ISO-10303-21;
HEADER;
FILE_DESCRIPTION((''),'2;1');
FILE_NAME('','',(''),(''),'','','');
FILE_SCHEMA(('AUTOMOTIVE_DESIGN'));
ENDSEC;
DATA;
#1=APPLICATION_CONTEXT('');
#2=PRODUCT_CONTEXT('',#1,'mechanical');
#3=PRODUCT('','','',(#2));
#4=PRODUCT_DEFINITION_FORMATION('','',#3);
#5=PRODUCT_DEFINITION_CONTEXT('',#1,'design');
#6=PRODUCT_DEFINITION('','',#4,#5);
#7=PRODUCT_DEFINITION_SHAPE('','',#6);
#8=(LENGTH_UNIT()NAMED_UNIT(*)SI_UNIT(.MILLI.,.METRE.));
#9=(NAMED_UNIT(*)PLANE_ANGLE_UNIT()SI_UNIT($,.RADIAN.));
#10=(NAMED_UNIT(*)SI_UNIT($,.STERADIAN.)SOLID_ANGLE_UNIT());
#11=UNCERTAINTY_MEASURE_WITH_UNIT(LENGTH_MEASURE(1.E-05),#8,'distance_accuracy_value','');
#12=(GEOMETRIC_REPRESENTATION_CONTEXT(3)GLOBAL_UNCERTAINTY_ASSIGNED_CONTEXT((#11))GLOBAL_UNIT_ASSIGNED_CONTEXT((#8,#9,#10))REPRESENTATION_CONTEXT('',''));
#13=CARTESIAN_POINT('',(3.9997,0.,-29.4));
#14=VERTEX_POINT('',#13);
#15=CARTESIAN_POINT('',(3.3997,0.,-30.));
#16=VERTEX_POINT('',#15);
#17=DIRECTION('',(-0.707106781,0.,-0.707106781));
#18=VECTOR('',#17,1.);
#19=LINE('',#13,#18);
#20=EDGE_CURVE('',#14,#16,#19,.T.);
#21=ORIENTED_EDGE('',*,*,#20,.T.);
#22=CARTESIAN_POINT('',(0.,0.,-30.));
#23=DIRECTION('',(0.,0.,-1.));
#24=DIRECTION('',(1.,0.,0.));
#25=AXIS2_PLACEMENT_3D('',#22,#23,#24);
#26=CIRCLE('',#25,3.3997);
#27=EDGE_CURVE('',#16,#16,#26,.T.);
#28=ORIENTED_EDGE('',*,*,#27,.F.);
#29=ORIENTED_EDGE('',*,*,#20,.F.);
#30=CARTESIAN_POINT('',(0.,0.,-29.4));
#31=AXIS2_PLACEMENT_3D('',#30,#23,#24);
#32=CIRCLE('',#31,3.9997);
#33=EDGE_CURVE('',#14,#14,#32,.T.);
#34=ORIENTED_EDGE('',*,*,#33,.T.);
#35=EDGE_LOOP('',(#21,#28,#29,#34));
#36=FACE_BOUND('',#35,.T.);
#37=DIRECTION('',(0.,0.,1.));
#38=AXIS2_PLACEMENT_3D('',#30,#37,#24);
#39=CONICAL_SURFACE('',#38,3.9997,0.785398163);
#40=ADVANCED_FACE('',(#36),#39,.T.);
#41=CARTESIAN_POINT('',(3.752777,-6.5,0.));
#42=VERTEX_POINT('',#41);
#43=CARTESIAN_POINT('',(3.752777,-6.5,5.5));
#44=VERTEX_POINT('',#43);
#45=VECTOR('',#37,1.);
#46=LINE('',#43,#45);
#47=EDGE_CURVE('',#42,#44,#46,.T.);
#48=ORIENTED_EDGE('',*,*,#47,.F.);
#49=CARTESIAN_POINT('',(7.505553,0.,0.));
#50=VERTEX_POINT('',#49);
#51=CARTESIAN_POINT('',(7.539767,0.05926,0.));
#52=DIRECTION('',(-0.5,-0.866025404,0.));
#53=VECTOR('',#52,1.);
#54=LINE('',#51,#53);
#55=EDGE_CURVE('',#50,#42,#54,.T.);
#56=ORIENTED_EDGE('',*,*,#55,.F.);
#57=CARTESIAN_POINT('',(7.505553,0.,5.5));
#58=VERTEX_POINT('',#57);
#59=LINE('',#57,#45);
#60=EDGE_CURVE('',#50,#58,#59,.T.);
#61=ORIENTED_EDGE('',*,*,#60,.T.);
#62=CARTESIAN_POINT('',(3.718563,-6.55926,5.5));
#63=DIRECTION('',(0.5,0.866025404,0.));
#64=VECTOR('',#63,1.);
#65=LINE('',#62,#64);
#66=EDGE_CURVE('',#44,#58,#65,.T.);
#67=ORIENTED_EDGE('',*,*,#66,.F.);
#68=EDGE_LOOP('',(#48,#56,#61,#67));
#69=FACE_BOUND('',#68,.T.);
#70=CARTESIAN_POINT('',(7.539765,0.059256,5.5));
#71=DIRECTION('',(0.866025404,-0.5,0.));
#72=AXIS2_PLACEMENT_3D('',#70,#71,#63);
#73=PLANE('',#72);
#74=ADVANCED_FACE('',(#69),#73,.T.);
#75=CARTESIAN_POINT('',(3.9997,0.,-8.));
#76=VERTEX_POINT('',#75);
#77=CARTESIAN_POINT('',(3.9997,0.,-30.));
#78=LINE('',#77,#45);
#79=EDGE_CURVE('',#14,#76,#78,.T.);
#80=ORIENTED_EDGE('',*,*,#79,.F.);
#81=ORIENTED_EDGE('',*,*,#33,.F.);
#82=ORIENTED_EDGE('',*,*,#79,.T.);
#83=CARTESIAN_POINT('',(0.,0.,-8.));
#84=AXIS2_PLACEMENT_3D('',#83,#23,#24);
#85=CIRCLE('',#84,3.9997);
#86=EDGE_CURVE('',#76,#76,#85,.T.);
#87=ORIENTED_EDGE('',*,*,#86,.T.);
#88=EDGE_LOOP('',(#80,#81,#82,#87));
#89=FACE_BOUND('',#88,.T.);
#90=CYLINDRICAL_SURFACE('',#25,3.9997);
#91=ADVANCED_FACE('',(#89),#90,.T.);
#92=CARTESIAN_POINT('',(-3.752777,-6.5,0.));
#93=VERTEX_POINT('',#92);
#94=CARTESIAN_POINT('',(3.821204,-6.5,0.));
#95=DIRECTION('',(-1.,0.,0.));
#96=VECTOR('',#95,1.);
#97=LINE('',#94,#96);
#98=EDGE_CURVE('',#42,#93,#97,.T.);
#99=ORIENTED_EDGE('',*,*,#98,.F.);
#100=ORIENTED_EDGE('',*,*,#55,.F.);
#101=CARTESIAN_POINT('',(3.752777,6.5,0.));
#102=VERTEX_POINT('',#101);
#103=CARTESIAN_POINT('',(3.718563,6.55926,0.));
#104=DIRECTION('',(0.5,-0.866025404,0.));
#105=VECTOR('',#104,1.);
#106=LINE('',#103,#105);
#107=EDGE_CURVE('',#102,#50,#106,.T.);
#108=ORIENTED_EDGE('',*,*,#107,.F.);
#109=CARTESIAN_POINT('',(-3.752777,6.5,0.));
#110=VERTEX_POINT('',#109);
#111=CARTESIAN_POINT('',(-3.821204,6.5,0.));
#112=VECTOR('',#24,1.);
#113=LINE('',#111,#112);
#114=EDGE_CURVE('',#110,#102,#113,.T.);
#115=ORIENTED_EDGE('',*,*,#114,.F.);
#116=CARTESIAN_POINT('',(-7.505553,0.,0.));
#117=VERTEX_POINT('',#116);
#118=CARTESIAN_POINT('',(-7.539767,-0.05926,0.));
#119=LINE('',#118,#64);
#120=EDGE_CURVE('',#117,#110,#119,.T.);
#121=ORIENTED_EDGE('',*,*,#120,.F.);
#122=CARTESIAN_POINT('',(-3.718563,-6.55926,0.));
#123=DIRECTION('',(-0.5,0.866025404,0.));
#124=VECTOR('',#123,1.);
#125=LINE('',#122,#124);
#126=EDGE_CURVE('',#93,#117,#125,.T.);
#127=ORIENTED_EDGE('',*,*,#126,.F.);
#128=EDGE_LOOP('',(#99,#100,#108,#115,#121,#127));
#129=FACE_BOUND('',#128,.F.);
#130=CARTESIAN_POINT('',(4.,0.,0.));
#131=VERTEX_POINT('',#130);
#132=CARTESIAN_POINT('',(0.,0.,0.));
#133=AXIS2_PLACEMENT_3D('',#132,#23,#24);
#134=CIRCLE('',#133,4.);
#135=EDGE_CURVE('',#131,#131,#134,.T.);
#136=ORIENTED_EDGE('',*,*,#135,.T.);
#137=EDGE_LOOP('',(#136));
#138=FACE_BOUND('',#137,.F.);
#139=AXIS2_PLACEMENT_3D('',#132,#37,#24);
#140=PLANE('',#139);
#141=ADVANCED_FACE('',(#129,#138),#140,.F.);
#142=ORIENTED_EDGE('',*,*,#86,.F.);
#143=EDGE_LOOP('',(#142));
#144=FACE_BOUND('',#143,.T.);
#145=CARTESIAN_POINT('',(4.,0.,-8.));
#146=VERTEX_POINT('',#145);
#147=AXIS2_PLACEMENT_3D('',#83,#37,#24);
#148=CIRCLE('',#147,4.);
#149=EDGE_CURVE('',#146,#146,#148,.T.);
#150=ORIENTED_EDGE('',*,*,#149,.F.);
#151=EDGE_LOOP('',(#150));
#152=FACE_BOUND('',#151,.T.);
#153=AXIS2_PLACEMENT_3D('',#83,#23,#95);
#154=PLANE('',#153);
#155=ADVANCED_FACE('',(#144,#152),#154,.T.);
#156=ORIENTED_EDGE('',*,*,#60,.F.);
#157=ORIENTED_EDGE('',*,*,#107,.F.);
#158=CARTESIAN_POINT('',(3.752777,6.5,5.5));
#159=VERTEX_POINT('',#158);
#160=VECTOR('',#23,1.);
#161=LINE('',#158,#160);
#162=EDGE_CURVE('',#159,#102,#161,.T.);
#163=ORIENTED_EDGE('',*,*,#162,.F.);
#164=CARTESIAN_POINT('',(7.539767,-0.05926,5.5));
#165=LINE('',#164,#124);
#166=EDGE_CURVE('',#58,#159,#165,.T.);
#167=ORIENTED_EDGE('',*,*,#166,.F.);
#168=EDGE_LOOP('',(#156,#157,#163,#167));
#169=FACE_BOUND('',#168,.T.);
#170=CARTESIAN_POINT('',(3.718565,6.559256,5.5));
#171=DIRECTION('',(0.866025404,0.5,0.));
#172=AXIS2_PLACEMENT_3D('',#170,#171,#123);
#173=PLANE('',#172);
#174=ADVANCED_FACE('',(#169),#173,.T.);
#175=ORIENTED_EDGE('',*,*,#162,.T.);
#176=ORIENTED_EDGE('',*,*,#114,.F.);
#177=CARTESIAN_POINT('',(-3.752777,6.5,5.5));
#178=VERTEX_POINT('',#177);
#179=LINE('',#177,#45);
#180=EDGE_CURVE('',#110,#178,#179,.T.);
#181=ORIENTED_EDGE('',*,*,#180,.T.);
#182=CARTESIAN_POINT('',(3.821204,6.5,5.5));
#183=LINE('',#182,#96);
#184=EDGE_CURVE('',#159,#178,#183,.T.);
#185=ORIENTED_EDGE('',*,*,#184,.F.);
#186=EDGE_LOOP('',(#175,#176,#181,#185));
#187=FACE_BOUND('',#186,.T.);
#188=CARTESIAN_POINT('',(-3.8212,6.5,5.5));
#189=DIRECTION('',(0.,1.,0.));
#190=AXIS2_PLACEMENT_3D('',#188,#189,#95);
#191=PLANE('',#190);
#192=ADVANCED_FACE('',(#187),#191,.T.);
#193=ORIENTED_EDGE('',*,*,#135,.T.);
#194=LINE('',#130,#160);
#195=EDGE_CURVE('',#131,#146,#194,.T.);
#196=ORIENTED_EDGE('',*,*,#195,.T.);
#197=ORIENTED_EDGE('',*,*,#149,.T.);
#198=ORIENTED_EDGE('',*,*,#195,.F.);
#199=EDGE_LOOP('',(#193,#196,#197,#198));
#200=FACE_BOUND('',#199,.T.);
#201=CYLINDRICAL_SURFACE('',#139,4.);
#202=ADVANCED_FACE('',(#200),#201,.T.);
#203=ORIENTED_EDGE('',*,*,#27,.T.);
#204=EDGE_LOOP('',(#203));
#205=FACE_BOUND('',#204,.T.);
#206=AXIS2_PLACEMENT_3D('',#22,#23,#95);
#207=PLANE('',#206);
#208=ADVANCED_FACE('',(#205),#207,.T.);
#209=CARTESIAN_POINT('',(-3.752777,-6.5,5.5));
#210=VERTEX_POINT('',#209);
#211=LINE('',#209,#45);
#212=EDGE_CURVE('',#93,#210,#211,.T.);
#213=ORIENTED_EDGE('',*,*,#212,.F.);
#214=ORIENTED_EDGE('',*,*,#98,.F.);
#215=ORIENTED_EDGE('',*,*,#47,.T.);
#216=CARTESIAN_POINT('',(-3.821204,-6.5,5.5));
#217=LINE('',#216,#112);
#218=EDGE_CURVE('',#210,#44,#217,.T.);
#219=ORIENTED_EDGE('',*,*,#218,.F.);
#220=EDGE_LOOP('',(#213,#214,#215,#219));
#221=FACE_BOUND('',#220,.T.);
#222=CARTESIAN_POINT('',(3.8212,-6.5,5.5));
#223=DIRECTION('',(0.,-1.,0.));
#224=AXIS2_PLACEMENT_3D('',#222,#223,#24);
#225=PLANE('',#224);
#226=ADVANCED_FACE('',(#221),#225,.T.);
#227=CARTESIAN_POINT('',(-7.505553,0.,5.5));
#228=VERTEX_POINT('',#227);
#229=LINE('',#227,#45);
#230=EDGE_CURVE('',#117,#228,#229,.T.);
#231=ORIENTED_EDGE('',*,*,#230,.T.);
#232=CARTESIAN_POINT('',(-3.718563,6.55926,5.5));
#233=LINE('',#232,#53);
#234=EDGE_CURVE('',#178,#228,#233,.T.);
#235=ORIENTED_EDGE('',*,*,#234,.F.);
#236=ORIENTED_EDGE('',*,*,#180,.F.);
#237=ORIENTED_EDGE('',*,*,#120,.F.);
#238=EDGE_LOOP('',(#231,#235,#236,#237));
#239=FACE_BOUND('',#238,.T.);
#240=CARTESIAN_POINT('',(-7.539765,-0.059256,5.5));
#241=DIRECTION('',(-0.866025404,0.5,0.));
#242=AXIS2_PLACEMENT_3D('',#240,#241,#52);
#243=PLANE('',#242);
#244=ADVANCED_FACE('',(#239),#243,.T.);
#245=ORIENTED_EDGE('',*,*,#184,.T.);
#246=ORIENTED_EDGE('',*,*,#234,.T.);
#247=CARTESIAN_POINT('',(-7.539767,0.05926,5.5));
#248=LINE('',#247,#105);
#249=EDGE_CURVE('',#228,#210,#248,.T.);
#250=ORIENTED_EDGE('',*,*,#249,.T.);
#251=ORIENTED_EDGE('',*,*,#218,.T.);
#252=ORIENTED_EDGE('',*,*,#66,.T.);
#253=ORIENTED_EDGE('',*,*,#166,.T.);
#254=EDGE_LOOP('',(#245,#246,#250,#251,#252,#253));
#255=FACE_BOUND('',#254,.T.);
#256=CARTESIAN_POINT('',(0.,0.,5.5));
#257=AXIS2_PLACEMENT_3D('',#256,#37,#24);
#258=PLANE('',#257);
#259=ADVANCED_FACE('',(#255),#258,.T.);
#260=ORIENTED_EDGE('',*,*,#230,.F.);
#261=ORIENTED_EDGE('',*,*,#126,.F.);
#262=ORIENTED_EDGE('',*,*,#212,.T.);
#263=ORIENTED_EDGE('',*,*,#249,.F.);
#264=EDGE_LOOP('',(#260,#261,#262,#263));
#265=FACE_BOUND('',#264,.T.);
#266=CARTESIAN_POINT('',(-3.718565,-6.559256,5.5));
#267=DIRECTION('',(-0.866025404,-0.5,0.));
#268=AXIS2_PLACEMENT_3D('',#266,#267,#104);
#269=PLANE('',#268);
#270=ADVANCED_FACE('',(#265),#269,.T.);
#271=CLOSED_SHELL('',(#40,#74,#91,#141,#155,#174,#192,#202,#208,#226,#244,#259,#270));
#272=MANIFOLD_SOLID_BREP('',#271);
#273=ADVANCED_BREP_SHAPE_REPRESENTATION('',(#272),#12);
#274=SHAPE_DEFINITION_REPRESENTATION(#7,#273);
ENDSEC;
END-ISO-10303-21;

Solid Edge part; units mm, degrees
sketch "Sketch1" plane through (0, 0, 0) normal (0, 0, 1) x (1, 0, 0)
  circle A0 centre (0, 0) radius 7.54
  dimension "D1" = 15.08
extrude "Protrusion1" add sketch "Sketch1" along normal blind 5.5
sketch "Sketch2" plane through (0, 0, 0) normal (0, 0, -1) x (1, 0, 0)
  circle A0 centre (0, 0) radius 4
extrude "Protrusion2" add sketch "Sketch2" along normal blind 30
sketch "Sketch3" plane through (0, 0, -30) normal (0, 0, -1) x (1, 0, 0)
  circle A0 centre (0, 0) radius 3.9997
extrude "Cutout1" cut sketch "Sketch3" against normal blind 22 flip side to cut
chamfer "Chamfer_1" distance 0.6 angle 45 1 edges at (-3.9997, 0, -30)
sketch "Sketch4" plane through (0, 0, 5.5) normal (0, 0, 1) x (1, 0, 0)
  line L0 (-3.8212, 6.5) -> (3.8212, 6.5)
  dimension "D1" = 13
extrude "Cutout2" cut sketch "Sketch4" against normal up to next material side at (0, 6.55, 5.5)
pattern_circular "Pattern1" count 6 over 360 about axis through (0, 0, 5.5) along (0, 0, 1) of "Cutout2"
properties part number "300606"
